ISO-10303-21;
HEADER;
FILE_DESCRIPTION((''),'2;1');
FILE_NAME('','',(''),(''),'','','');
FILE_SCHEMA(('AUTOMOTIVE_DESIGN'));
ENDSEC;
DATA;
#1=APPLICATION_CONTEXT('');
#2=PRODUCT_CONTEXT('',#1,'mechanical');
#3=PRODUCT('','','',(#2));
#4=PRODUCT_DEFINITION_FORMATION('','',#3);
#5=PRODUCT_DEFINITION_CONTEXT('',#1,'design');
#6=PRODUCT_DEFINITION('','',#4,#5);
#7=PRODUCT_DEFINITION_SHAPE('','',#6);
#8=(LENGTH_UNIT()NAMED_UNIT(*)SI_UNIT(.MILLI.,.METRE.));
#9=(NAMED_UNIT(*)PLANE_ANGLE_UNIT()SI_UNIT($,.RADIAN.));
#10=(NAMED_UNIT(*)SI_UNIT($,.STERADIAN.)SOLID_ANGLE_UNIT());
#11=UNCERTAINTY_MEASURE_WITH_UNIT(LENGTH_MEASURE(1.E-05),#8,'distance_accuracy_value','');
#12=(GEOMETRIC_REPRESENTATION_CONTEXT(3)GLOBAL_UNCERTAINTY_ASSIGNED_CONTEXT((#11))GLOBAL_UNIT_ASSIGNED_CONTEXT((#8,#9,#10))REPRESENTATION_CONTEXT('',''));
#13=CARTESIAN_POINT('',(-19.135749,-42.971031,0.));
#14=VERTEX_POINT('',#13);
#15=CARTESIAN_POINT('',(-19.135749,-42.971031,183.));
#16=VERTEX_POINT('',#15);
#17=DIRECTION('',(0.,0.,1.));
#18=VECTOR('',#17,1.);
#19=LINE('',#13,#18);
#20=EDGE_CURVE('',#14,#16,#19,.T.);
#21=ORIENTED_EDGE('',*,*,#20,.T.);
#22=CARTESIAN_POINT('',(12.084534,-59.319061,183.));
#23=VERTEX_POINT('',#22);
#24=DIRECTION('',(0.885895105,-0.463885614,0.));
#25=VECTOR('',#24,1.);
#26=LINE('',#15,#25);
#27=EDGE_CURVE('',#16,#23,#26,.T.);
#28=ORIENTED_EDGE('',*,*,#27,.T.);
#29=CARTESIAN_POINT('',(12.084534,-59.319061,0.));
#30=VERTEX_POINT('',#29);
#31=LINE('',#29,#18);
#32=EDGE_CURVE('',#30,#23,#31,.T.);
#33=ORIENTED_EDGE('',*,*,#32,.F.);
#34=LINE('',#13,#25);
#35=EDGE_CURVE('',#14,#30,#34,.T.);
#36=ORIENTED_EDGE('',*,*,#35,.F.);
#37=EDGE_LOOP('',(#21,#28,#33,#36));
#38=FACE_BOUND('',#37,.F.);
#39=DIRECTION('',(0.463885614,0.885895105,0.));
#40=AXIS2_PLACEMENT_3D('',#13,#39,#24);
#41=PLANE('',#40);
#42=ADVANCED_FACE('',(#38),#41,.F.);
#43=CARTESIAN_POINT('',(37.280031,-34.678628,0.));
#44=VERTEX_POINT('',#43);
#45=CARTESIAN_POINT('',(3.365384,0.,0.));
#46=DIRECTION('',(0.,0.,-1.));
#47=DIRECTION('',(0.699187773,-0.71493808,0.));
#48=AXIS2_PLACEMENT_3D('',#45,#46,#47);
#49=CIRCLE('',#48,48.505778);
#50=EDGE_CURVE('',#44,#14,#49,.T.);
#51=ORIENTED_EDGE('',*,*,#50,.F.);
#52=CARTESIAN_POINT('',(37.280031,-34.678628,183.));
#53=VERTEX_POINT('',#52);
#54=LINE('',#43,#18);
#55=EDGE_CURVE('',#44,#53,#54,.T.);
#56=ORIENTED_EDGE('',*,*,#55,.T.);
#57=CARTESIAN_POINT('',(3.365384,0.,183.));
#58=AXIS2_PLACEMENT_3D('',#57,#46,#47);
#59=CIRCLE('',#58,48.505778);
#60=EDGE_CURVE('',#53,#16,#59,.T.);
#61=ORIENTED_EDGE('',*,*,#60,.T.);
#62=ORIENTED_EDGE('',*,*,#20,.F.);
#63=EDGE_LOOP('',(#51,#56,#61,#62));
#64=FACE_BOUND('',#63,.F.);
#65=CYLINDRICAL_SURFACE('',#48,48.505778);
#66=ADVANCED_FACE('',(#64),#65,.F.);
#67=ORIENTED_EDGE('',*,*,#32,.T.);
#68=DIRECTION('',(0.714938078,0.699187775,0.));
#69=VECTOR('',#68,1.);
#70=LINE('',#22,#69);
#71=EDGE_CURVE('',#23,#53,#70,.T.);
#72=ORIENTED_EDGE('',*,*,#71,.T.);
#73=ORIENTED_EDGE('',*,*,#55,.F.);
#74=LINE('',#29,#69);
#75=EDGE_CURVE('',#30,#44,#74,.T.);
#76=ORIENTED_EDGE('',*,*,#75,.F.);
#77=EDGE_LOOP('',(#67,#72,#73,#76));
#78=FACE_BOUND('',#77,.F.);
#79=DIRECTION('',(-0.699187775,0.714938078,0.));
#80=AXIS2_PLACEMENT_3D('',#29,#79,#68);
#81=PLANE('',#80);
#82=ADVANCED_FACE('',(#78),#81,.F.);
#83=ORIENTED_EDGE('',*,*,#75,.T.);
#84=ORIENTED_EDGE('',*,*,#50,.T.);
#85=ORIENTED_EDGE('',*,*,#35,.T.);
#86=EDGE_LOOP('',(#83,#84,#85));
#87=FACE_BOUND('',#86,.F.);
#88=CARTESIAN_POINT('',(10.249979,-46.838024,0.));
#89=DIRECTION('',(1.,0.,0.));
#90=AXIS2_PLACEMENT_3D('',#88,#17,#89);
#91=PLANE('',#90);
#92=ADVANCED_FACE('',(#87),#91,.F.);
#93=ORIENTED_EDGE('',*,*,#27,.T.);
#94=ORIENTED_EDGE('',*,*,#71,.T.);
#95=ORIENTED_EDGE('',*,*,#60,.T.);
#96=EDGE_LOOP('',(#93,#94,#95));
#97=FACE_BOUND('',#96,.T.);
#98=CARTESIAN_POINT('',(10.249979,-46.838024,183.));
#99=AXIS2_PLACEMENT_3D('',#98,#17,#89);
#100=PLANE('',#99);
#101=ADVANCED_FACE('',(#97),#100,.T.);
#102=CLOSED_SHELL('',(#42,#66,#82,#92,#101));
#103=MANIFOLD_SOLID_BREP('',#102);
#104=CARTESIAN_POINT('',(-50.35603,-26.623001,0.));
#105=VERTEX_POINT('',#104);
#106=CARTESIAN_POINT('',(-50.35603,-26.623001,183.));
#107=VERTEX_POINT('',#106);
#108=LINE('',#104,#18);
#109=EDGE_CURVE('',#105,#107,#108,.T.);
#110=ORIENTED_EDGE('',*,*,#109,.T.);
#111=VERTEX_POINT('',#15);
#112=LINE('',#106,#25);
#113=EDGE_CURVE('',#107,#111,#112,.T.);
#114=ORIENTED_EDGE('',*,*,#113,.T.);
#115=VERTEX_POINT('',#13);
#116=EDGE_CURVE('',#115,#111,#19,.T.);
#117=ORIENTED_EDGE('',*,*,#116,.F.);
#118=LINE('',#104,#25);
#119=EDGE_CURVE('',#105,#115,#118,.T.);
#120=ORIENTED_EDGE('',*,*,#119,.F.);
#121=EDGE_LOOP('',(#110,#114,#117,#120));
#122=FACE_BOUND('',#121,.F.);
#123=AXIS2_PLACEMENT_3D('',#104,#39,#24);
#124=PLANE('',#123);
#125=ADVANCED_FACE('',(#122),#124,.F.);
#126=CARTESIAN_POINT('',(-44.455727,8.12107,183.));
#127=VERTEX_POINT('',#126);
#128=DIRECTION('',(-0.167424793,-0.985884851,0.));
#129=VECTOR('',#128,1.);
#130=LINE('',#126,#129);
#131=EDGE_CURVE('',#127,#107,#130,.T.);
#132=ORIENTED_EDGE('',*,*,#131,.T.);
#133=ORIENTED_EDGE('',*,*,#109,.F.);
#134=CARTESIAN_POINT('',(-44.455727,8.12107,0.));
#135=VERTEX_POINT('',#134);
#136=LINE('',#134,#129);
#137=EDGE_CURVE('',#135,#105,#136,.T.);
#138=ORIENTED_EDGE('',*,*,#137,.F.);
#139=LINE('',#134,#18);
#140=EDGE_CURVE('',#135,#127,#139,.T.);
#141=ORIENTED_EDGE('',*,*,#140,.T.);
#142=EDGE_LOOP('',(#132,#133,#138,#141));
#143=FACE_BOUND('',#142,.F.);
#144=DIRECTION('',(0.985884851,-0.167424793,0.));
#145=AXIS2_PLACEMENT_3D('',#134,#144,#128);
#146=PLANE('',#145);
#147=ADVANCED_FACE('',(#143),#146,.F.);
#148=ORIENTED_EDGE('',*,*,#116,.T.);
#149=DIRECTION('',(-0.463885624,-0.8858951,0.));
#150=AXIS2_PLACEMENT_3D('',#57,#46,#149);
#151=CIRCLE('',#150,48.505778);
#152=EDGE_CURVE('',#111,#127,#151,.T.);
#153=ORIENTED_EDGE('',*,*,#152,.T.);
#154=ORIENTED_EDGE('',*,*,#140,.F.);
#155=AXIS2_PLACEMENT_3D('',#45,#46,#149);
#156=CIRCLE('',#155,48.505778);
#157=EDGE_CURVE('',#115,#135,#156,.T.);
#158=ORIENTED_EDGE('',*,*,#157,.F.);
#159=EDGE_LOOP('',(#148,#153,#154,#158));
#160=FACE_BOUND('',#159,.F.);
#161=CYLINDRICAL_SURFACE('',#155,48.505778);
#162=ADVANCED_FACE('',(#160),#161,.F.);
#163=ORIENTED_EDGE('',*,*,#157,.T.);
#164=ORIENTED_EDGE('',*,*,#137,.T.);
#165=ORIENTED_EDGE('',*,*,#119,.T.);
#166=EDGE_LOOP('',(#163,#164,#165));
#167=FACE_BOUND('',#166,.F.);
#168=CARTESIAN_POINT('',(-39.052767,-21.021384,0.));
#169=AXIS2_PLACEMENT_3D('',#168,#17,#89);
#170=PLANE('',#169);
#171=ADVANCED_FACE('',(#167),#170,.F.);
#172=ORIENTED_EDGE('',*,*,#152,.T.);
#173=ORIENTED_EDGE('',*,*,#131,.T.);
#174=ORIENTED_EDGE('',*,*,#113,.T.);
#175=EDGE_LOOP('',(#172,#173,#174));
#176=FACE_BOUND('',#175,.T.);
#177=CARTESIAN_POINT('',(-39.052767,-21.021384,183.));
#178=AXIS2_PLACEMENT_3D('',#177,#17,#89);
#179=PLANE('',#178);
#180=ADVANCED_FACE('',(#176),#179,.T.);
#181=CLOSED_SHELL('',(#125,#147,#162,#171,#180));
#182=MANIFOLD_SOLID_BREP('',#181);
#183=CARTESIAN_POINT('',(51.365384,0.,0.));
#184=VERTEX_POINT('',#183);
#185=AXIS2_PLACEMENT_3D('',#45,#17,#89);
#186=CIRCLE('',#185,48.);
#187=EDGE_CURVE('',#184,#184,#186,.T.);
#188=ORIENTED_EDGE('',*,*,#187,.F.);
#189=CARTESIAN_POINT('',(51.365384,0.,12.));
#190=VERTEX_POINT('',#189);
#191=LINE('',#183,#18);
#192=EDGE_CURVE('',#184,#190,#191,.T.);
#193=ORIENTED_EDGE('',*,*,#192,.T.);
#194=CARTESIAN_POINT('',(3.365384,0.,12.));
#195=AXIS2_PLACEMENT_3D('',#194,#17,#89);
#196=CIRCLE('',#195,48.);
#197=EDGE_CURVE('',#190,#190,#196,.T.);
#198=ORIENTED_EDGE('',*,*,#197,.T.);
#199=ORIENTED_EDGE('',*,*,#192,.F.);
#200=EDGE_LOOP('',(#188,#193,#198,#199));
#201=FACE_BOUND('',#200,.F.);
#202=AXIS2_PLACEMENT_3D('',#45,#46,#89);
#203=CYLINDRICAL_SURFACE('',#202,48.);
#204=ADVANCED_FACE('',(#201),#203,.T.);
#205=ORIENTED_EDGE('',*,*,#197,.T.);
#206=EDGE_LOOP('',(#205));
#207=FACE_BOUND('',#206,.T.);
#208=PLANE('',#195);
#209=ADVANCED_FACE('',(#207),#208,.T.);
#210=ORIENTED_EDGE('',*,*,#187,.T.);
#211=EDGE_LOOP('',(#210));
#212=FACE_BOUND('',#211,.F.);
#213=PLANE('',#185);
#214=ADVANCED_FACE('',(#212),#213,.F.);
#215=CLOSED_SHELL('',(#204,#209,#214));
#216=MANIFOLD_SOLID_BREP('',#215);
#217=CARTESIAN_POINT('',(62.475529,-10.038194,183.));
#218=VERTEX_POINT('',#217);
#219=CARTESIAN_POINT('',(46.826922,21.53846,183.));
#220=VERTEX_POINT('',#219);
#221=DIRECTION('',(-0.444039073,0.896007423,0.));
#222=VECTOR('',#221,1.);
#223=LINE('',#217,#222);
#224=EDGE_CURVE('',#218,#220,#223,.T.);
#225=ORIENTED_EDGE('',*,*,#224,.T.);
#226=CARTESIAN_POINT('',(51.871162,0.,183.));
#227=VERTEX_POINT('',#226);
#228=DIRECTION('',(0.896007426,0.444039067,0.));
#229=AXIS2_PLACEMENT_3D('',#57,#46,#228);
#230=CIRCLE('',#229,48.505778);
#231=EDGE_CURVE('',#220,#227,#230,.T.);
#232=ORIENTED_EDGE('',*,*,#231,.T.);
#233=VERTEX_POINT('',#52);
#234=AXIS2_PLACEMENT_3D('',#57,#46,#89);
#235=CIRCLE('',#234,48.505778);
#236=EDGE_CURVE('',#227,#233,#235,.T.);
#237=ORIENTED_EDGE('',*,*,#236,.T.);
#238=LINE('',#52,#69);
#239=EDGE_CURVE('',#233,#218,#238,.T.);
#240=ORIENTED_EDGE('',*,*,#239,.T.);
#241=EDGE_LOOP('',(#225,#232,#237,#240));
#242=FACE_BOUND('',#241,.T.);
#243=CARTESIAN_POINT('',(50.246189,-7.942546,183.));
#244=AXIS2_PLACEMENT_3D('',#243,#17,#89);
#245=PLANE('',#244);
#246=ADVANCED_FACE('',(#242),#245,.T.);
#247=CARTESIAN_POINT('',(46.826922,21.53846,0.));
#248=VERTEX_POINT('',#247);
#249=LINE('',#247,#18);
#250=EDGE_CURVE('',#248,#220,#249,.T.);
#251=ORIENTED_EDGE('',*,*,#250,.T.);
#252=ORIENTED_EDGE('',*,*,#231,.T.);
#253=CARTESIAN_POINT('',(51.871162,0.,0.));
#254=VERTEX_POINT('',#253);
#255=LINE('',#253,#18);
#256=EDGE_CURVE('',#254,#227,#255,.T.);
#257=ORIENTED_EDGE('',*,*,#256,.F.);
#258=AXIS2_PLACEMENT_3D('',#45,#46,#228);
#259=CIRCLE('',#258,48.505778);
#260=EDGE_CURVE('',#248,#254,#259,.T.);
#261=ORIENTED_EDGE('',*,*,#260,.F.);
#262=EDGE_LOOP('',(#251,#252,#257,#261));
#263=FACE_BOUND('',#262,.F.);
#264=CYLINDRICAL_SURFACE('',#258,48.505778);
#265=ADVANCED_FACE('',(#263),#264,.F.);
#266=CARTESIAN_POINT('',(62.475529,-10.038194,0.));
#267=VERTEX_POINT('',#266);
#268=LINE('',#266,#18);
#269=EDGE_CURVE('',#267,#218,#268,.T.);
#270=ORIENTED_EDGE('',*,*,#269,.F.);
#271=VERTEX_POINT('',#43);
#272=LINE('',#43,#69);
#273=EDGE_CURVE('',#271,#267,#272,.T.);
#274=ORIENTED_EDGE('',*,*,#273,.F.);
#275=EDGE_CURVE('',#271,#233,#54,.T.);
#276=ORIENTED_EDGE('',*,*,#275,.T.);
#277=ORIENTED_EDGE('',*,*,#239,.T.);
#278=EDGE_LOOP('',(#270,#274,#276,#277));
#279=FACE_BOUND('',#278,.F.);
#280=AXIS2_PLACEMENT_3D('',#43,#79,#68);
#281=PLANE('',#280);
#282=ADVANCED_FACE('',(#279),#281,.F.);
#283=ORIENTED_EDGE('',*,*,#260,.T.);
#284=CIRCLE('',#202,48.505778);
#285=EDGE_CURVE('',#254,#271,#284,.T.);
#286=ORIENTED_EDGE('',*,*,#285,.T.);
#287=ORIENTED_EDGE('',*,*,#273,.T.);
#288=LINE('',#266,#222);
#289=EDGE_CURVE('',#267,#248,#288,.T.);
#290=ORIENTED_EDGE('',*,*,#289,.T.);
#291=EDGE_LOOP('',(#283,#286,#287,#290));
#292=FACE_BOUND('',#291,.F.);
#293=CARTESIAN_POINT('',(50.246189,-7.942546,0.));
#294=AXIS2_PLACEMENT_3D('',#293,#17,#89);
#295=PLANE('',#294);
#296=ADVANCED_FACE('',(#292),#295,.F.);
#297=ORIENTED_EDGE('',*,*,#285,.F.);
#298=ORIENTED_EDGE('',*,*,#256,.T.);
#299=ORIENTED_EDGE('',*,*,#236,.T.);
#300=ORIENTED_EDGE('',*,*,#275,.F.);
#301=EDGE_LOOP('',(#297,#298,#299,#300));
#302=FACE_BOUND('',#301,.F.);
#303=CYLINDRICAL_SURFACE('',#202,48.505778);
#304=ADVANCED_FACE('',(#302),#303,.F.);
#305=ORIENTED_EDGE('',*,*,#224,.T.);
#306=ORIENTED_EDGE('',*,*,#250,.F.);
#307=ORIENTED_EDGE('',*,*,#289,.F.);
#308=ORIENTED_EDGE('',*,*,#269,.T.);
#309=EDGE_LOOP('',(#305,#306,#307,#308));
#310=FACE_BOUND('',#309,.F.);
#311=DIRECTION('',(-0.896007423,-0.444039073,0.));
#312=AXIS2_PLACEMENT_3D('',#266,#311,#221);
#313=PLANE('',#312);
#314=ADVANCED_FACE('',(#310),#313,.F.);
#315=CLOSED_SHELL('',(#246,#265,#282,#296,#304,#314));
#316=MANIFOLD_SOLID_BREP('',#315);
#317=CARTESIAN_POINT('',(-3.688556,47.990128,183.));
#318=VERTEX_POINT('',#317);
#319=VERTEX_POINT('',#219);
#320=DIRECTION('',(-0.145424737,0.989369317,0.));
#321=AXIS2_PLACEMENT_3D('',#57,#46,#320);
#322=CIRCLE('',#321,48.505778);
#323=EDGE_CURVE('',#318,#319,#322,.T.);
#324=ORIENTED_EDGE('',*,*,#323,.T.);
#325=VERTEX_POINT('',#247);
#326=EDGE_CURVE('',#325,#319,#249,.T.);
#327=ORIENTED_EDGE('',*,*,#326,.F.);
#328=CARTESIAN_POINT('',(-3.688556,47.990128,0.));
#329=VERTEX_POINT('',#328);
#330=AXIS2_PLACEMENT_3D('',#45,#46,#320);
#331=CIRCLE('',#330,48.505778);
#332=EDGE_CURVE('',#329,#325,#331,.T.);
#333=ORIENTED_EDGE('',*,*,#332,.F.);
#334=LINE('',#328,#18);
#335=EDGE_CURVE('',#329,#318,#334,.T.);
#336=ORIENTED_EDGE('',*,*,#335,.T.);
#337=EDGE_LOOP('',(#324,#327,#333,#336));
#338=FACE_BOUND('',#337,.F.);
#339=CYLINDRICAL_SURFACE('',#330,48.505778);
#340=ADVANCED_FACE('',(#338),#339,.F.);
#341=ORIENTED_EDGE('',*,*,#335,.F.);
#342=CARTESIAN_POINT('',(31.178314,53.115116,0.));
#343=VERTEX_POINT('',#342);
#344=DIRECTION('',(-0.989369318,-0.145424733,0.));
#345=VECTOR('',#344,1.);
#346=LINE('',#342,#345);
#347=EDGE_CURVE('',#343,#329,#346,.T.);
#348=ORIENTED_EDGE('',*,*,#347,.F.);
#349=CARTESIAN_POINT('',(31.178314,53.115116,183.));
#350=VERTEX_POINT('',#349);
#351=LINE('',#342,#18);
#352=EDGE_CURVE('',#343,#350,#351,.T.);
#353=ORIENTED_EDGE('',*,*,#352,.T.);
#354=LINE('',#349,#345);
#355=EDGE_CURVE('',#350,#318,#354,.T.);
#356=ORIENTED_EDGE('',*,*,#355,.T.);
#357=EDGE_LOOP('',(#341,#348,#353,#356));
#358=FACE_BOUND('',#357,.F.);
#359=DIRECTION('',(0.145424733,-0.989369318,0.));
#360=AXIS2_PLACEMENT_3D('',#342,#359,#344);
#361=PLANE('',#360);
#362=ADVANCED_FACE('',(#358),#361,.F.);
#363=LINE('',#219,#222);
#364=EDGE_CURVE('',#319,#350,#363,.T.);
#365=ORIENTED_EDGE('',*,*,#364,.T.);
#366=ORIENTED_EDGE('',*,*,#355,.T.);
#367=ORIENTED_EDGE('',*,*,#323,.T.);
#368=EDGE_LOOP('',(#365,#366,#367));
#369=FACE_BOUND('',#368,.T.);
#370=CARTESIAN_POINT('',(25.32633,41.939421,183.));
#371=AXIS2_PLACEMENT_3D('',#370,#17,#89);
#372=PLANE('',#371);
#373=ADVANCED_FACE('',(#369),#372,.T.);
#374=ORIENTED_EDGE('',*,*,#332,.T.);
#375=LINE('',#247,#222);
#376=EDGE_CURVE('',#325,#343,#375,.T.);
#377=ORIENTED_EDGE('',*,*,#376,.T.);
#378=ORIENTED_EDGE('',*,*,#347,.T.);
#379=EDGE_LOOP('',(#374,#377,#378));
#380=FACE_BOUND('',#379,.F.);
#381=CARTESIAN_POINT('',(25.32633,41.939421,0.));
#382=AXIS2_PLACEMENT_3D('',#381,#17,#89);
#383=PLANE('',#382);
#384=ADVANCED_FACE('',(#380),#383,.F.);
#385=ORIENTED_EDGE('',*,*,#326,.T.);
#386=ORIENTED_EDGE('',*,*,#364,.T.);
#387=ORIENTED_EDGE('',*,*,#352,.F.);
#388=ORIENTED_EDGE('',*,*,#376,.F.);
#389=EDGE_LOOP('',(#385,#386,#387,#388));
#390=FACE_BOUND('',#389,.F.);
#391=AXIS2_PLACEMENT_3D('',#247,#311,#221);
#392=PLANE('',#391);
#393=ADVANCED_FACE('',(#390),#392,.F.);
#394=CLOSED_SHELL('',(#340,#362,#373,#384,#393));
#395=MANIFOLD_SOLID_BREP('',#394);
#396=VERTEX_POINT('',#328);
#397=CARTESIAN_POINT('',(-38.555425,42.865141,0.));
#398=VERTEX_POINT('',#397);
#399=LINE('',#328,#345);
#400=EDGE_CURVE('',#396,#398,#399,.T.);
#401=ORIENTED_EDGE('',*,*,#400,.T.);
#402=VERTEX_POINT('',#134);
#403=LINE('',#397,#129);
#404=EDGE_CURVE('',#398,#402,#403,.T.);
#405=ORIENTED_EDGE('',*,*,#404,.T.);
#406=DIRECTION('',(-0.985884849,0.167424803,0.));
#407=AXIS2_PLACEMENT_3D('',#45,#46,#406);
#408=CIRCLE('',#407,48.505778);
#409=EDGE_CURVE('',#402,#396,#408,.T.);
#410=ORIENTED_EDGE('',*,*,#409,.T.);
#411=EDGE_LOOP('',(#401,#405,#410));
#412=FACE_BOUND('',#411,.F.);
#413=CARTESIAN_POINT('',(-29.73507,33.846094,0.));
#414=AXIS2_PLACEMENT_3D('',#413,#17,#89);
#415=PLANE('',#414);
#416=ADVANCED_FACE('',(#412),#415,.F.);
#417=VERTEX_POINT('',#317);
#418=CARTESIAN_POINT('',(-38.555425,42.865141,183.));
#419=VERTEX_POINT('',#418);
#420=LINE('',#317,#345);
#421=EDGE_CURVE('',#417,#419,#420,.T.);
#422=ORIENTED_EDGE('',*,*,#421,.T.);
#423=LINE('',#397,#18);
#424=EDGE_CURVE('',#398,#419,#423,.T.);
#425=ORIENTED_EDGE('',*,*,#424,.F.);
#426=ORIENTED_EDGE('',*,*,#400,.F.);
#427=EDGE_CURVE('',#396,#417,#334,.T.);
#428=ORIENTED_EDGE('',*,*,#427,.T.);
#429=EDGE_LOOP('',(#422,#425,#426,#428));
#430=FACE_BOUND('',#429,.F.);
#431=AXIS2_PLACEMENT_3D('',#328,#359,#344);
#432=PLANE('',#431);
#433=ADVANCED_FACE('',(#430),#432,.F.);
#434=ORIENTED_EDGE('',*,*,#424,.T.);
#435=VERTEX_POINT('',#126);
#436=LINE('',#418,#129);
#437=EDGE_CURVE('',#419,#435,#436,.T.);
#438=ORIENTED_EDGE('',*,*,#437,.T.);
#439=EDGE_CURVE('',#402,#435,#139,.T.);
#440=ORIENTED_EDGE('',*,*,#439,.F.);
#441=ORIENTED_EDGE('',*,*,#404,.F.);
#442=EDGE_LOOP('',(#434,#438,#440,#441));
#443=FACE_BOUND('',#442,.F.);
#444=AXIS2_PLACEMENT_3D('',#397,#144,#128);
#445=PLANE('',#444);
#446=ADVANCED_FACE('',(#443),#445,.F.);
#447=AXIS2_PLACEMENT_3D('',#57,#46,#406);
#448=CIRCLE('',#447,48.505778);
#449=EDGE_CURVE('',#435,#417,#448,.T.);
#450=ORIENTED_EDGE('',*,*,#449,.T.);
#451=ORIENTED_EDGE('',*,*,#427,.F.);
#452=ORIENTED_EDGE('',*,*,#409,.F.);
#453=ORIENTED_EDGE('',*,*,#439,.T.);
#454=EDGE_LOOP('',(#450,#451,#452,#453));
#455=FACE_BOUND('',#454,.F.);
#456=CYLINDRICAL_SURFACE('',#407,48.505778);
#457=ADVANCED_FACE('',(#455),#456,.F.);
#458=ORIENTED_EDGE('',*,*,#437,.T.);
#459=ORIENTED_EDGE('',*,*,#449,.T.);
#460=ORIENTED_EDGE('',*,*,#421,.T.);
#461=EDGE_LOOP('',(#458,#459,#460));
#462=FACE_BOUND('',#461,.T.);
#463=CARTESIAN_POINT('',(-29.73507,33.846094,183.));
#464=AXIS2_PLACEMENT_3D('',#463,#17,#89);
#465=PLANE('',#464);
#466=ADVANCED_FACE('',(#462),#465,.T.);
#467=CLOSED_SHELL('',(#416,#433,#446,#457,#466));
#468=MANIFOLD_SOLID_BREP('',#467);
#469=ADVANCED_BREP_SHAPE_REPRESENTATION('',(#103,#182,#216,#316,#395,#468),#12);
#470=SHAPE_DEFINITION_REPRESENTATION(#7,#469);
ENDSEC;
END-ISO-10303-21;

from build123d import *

# Parameters (mm, degrees)
F6_DEPTH = 183
F7_R     = 48
F8_DEPTH = 12


# Not quite as in the source:
# - a feature of the source that left no trace in its solid (it failed there, or was rolled back) is left out


with BuildPart() as f6:
    # F5 (on face) → F6 (new body)
    with BuildSketch(Plane.XY):
        with BuildLine():
            ThreePointArc((37.2800312122, -34.6786276575), (10.4193238865, -47.9901283759), (-19.135748604, -42.9710308984))
            Line((-19.135748604, -42.9710308984), (12.0845335159, -59.319060862))
            Line((12.0845335159, -59.319060862), (37.2800312122, -34.6786276575))
        make_face()
    extrude(amount=F6_DEPTH)


with BuildPart() as f6b:
    # F5 (on face) → F6, piece 2 (new body)
    with BuildSketch(Plane.XY):
        with BuildLine():
            ThreePointArc((-19.135748604, -42.9710308984), (-40.0961528093, -21.538460152), (-44.4557270426, 8.1210702852))
            Line((-44.4557270426, 8.1210702852), (-50.3560297098, -26.6230014659))
            Line((-50.3560297098, -26.6230014659), (-19.135748604, -42.9710308984))
        make_face()
    extrude(amount=F6_DEPTH)


with BuildPart() as f6c:
    # F5 (on face) → F6, piece 3 (new body)
    with BuildSketch(Plane.XY):
        with BuildLine():
            ThreePointArc((-44.4557270426, 8.1210702852), (-30.5492623338, 34.6786277053), (-3.6885555549, 47.9901283027))
            Line((-3.6885555549, 47.9901283027), (-38.555424539, 42.8651410735))
            Line((-38.555424539, 42.8651410735), (-44.4557270426, 8.1210702852))
        make_face()
    extrude(amount=F6_DEPTH)


with BuildPart() as f6d:
    # F5 (on face) → F6, piece 4 (new body)
    with BuildSketch(Plane.XY):
        with BuildLine():
            Line((46.8269215589, 21.5384603135), (31.17831377, 53.1151155819))
            Line((31.17831377, 53.1151155819), (-3.6885555549, 47.9901283027))
            ThreePointArc((-3.6885555549, 47.9901283027), (25.8665170053, 42.9710311227), (46.8269215589, 21.5384603135))
        make_face()
    extrude(amount=F6_DEPTH)


with BuildPart() as f6e:
    # F5 (on face) → F6, piece 5 (new body)
    with BuildSketch(Plane.XY):
        with BuildLine():
            Line((62.4755290368, -10.0381943275), (46.8269215589, 21.5384603135))
            ThreePointArc((46.8269215589, 21.5384603135), (50.5932689153, 11.0606242686), (51.8711622521, 0))
            ThreePointArc((51.8711622521, 0), (48.0748174608, -18.8116208847), (37.2800312122, -34.6786276575))
            Line((37.2800312122, -34.6786276575), (62.4755290368, -10.0381943275))
        make_face()
    extrude(amount=F6_DEPTH)


with BuildPart() as f8:
    # F7 (on face) → F8 (new body)
    with BuildSketch(Plane.XY):
        with Locations((3.3653844148, 0)):
            Circle(F7_R)
    extrude(amount=F8_DEPTH)


solid = Compound([f6.part, f6b.part, f6c.part, f6d.part, f6e.part, f8.part])
